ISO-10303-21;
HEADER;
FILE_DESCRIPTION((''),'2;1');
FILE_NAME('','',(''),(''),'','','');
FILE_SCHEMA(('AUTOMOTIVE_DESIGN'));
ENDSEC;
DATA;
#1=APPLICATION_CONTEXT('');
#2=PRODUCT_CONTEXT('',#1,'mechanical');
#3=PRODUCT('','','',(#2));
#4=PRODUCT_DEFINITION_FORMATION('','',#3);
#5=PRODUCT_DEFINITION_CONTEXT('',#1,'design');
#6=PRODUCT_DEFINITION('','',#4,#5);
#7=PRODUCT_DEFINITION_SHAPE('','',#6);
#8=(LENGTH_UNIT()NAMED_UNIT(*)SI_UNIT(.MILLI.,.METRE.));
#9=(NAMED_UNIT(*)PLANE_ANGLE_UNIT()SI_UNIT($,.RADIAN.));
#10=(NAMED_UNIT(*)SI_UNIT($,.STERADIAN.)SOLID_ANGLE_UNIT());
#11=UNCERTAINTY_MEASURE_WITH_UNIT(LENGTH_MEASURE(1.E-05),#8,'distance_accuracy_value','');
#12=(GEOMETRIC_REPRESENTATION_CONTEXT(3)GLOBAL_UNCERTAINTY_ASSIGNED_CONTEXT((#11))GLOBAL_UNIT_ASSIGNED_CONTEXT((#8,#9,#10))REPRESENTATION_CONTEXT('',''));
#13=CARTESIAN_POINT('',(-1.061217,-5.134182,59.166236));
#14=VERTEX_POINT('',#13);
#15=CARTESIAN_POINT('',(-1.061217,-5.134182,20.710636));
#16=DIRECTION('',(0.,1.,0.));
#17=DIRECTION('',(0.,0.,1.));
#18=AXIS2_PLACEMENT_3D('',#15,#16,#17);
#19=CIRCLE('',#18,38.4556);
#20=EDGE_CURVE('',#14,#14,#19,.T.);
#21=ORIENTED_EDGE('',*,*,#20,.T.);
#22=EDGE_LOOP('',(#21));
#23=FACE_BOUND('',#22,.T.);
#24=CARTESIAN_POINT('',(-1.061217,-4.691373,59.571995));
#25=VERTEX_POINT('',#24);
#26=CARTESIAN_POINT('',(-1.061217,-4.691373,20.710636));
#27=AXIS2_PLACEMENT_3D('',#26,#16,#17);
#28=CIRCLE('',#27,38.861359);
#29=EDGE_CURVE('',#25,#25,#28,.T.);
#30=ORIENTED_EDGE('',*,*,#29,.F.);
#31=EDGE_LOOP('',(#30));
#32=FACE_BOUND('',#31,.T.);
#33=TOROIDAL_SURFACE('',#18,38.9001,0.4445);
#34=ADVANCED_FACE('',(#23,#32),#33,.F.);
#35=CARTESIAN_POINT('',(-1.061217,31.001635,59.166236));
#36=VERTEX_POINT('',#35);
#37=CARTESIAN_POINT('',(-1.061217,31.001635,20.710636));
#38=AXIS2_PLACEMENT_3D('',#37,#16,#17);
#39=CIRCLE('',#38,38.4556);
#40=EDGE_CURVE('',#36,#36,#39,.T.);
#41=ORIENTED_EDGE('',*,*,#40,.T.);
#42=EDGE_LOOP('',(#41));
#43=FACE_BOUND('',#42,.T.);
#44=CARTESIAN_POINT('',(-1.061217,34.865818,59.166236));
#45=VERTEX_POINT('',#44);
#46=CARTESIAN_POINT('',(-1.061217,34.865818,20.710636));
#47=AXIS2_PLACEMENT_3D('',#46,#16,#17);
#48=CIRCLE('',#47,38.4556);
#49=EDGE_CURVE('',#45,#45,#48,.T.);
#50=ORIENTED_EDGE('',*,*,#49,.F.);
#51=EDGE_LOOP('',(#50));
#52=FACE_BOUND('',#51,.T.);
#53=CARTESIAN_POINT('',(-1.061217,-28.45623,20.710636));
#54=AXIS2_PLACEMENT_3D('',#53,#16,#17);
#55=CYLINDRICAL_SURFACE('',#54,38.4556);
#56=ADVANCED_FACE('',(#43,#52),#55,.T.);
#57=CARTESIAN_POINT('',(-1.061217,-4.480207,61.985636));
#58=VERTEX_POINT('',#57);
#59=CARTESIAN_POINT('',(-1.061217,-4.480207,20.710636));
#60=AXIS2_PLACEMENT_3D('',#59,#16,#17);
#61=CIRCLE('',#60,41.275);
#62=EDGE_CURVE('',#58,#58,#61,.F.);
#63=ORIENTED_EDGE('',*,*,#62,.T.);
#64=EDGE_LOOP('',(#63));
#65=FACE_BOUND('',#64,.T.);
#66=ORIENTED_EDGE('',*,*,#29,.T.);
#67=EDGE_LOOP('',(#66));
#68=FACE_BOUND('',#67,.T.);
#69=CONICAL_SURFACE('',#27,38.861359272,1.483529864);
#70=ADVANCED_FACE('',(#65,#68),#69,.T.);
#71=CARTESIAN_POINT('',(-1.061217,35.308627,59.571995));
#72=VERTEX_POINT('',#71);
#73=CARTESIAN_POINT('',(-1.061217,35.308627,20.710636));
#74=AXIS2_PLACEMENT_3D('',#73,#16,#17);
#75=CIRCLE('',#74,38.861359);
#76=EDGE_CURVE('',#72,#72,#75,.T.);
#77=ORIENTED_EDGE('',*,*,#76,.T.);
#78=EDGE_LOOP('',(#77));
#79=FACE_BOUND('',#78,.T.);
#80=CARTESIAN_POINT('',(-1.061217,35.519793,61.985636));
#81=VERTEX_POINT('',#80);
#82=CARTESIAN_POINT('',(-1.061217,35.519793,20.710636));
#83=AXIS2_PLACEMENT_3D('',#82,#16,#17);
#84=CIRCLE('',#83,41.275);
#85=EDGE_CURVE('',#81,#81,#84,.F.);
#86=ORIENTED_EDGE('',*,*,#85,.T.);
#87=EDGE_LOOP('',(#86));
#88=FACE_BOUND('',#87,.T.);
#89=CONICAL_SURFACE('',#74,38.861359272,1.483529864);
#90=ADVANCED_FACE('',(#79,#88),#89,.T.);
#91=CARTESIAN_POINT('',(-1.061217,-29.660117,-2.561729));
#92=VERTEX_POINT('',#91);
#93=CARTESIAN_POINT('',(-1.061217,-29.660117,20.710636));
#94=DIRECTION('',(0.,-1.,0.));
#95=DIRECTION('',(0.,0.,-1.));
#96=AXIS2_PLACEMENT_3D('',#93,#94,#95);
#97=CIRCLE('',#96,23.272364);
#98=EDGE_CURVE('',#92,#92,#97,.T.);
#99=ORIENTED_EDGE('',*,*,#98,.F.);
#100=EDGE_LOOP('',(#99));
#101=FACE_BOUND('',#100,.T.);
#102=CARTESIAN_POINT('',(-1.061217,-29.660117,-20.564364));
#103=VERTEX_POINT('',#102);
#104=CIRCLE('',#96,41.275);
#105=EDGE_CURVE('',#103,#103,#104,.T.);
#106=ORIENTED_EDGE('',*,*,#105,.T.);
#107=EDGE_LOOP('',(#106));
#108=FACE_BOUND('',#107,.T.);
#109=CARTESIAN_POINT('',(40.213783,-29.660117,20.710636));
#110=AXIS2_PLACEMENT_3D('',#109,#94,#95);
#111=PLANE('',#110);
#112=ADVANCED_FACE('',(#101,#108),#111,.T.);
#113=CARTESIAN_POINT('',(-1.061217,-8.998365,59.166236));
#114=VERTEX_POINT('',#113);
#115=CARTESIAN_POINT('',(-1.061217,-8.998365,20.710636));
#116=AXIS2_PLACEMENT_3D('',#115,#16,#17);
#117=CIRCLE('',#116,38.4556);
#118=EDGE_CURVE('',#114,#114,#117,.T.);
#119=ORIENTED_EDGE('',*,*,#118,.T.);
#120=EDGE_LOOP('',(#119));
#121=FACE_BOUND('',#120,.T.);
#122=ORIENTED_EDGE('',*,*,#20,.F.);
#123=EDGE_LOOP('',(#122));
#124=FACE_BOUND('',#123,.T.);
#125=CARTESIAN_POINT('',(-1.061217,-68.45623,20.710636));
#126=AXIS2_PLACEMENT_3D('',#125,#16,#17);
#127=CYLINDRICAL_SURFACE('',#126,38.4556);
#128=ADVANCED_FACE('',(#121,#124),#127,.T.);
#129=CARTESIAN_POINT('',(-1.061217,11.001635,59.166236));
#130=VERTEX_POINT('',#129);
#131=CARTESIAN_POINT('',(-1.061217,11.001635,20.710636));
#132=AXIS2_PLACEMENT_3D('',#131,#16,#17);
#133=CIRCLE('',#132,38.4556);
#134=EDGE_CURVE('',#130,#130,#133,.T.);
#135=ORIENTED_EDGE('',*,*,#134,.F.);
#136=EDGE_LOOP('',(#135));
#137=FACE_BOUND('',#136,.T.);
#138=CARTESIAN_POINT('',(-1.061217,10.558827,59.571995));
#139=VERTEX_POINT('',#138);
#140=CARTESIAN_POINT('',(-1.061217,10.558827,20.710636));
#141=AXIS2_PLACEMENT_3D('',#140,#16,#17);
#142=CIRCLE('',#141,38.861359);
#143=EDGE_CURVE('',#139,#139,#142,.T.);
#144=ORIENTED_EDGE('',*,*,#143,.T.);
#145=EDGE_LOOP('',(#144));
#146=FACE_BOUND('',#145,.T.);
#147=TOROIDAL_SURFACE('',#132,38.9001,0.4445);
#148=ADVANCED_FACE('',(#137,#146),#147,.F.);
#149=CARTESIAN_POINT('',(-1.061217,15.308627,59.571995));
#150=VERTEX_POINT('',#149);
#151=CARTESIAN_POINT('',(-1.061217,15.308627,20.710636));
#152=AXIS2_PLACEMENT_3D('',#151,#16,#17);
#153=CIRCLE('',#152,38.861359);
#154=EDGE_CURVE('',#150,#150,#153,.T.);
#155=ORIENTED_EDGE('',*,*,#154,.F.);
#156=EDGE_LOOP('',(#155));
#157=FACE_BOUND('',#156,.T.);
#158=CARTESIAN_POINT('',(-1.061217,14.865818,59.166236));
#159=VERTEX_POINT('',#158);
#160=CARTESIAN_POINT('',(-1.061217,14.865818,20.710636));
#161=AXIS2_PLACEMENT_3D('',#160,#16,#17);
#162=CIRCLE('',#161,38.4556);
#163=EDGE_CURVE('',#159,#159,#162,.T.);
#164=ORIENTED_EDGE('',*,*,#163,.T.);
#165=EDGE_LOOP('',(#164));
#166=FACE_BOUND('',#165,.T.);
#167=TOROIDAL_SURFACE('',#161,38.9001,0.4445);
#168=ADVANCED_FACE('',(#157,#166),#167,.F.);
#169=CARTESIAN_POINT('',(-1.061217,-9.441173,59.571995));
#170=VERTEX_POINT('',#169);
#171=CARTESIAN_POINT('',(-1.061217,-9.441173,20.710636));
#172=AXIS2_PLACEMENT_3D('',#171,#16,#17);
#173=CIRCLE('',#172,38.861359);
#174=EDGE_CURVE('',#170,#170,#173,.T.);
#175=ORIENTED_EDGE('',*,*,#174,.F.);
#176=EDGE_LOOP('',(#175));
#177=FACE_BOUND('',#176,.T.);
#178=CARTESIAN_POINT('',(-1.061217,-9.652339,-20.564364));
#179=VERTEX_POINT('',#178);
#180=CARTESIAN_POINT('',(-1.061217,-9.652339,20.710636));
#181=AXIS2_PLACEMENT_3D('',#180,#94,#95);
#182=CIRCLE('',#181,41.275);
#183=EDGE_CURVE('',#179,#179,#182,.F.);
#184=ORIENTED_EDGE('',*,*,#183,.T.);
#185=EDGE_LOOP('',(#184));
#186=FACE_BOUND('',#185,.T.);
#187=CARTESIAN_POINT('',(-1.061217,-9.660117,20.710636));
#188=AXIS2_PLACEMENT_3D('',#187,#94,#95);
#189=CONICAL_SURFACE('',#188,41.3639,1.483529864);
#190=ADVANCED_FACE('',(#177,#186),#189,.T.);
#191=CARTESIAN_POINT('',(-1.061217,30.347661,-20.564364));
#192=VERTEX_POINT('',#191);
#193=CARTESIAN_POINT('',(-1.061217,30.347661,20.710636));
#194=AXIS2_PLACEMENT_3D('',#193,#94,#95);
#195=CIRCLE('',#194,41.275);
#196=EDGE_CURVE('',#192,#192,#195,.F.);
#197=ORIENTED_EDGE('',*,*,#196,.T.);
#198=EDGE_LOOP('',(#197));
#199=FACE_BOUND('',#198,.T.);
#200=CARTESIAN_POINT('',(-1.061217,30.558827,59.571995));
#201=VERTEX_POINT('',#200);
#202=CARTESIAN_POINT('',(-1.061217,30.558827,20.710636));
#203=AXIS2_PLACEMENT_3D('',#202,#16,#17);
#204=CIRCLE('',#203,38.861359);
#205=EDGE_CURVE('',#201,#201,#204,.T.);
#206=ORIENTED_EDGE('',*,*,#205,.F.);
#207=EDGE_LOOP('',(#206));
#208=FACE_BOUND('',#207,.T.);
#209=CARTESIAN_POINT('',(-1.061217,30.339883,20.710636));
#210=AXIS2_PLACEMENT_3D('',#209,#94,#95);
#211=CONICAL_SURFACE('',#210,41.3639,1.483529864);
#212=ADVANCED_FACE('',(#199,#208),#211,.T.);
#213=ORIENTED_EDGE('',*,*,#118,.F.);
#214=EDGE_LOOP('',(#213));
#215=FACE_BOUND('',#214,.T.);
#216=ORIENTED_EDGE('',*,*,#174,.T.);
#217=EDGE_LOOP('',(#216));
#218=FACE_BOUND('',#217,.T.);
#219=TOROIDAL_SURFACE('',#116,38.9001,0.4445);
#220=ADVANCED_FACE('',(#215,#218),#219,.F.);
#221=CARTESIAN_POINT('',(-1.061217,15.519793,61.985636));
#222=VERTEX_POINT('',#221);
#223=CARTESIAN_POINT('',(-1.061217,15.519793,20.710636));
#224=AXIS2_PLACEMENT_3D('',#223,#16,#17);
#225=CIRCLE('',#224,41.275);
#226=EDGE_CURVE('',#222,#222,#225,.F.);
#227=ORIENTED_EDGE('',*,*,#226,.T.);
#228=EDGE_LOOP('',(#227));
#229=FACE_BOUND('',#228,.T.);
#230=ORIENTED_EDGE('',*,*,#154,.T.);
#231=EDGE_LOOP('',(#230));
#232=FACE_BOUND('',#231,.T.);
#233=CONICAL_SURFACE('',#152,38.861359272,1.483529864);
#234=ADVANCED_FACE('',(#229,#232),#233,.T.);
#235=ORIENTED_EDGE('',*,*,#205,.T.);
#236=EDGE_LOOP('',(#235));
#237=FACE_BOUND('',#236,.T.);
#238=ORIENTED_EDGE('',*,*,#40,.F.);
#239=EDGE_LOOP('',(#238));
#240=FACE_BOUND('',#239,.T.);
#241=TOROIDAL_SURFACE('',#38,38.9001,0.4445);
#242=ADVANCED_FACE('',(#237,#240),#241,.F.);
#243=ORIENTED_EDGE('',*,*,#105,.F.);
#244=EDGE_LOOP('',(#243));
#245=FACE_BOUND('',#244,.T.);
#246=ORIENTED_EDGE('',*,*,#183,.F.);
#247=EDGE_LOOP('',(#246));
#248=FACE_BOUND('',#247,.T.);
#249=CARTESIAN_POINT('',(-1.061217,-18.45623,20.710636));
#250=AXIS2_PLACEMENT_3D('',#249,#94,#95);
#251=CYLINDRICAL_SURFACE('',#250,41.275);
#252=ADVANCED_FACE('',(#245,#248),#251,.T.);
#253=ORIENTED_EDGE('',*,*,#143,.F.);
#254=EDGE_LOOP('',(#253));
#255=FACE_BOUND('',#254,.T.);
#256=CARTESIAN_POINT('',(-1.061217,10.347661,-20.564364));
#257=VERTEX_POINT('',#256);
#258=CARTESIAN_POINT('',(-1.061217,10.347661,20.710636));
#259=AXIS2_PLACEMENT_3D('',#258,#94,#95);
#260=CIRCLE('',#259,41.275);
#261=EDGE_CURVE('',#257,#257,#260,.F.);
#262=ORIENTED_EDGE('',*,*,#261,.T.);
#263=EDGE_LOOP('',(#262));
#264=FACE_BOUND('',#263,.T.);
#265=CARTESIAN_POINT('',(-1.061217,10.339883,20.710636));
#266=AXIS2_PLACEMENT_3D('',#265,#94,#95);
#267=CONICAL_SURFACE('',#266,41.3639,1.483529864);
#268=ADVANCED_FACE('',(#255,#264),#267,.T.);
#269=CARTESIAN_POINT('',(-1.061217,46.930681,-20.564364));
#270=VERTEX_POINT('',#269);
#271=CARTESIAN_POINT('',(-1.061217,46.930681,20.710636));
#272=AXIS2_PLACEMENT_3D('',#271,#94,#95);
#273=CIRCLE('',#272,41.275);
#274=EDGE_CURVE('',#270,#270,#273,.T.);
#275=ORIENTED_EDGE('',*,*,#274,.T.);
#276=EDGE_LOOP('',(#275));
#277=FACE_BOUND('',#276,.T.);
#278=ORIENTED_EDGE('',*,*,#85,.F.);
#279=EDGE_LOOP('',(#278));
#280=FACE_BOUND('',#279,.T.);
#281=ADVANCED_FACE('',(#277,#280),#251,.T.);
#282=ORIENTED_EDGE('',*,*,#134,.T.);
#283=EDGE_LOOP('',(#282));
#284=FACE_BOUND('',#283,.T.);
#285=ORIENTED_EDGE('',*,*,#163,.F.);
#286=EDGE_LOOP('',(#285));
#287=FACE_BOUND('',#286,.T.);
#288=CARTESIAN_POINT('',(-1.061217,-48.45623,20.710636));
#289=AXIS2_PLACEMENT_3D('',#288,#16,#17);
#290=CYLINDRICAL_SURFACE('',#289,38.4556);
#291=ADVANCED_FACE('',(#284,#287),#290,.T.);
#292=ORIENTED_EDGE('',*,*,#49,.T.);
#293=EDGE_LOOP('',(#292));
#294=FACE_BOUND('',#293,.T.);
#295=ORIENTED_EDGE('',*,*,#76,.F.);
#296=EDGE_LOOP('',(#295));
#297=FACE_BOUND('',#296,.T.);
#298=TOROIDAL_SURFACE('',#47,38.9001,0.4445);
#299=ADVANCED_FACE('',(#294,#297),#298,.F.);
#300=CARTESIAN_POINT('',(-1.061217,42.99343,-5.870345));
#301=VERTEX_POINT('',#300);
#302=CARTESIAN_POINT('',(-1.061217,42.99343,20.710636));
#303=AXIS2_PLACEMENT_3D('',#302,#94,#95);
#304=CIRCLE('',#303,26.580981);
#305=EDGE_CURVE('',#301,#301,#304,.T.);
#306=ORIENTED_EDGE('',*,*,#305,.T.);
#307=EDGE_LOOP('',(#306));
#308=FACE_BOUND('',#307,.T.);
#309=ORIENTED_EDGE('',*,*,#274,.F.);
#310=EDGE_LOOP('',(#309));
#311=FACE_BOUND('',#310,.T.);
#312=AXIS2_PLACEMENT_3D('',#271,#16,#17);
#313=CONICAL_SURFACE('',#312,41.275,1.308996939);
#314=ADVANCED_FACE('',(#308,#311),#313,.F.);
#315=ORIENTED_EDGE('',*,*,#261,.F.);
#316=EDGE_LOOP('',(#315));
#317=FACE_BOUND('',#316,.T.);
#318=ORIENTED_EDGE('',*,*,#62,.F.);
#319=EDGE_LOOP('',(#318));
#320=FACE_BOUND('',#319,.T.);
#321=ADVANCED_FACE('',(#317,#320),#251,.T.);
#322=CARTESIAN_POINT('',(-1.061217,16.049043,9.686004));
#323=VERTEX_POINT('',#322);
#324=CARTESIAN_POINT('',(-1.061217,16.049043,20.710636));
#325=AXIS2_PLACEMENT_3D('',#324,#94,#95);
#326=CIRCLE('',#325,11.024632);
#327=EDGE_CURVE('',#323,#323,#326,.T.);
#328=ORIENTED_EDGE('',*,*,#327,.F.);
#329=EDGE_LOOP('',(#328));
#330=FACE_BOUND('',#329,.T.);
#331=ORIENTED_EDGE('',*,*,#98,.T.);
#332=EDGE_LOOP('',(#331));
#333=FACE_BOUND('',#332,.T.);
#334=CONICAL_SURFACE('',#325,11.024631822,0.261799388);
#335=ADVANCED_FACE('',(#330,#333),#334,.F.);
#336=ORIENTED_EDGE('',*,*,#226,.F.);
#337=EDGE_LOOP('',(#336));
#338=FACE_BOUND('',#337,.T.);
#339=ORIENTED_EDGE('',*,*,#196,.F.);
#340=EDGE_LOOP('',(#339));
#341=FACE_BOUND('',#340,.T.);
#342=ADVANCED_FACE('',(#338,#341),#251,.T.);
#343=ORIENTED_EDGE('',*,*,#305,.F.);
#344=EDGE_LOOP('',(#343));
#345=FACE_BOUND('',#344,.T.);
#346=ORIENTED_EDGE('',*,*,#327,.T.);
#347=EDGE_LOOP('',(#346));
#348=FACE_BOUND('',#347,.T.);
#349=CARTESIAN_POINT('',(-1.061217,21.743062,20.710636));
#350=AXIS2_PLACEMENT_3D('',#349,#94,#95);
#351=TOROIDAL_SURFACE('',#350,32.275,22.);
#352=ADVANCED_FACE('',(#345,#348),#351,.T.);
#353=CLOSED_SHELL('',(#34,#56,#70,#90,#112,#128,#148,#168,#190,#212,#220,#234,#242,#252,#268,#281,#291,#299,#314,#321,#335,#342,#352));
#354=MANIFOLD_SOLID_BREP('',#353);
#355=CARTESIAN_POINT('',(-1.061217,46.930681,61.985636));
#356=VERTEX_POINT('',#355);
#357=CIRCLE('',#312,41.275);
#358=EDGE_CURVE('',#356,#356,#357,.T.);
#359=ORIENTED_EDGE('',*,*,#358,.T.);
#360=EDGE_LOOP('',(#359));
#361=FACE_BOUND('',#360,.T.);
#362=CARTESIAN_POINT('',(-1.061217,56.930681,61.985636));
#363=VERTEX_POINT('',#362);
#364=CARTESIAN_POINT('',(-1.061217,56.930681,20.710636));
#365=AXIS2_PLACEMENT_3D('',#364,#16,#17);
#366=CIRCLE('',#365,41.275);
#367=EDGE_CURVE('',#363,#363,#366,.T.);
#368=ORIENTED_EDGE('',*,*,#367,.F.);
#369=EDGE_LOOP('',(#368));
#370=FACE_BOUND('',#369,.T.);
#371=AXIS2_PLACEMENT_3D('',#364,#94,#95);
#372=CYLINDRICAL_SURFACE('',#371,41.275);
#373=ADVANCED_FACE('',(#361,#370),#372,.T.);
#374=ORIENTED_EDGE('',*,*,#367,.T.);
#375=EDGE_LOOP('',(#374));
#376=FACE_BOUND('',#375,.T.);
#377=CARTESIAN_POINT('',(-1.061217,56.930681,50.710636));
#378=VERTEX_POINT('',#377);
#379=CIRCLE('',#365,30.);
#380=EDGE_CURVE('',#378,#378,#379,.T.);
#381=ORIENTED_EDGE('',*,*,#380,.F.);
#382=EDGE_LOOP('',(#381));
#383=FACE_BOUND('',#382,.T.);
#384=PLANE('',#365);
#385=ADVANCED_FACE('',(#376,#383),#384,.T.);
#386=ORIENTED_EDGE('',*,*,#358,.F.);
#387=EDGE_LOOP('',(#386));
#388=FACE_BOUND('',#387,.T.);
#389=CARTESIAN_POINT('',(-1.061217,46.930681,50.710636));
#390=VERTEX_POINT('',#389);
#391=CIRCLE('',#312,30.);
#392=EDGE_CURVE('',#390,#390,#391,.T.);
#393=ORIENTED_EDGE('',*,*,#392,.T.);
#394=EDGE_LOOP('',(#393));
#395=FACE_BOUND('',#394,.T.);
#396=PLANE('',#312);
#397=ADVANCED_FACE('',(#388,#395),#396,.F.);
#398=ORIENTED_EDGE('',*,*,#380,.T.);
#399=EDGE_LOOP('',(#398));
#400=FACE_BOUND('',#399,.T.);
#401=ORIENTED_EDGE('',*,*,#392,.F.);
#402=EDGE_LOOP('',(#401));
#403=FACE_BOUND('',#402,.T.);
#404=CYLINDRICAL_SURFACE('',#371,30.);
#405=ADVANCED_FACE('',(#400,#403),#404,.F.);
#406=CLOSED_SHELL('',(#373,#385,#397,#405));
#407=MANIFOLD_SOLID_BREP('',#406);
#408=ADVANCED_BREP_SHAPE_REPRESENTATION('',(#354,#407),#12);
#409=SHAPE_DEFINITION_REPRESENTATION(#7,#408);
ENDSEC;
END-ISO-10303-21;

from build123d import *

# Parameters (mm, degrees)
SKETCH1_R           = 41.275
SKETCH1_R_2         = 30
BOSS_EXTRUDE1_DEPTH = 10


# Read off the part's stored shape, not the designer's step: Nozzle_rev2
with BuildPart() as part:
    # Nozzle_rev2 outline → Nozzle_rev2 (revolve)
    with BuildSketch(Plane(origin=(-1.061217108, 0, 20.710635557), x_dir=(1, 0, 0), z_dir=(0, 0, 1))):
        with BuildLine():
            Line((41.275, 15.519793134), (41.275, 30.347660732))
            Line((41.275, 30.347660732), (38.861359272, 30.558826933))
            ThreePointArc((38.861359272, 30.558826933), (38.572380224, 30.701335629), (38.4556, 31.001635476))
            Line((38.4556, 31.001635476), (38.4556, 34.86581839))
            ThreePointArc((38.4556, 34.86581839), (38.572380224, 35.166118237), (38.861359272, 35.308626933))
            Line((38.861359272, 35.308626933), (41.275, 35.519793134))
            Line((41.275, 35.519793134), (41.275, 46.930680607))
            Line((41.275, 46.930680607), (26.580981008, 42.993430084))
            ThreePointArc((26.580981008, 42.993430084), (13.222441117, 32.743061906), (11.024631822, 16.049042913))
            Line((11.024631822, 16.049042913), (23.27236431, -29.660117011))
            Line((23.27236431, -29.660117011), (41.275, -29.660117011))
            Line((41.275, -29.660117011), (41.275, -9.652339268))
            Line((41.275, -9.652339268), (38.861359272, -9.441173067))
            ThreePointArc((38.861359272, -9.441173067), (38.572380224, -9.298664371), (38.4556, -8.998364524))
            Line((38.4556, -8.998364524), (38.4556, -5.13418161))
            ThreePointArc((38.4556, -5.13418161), (38.572380224, -4.833881763), (38.861359272, -4.691373067))
            Line((38.861359272, -4.691373067), (41.275, -4.480206866))
            Line((41.275, -4.480206866), (41.275, 10.347660732))
            Line((41.275, 10.347660732), (38.861359272, 10.558826933))
            ThreePointArc((38.861359272, 10.558826933), (38.572380224, 10.701335629), (38.4556, 11.001635476))
            Line((38.4556, 11.001635476), (38.4556, 14.86581839))
            ThreePointArc((38.4556, 14.86581839), (38.572380224, 15.166118237), (38.861359272, 15.308626933))
            Line((38.861359272, 15.308626933), (41.275, 15.519793134))
        make_face()
    revolve(axis=Axis((-1.061217108, 0, 20.710635557), (0, 1, 0)))


with BuildPart() as body_2:
    # Sketch1 → Boss-Extrude1 (new body)
    with BuildSketch(Plane(origin=(0, 46.930680607, 0), x_dir=(1, 0, 0), z_dir=(0, 1, 0))):
        with Locations(Location((-1.061217108, -20.710635557, 0), (0, 0, 270))):
            Circle(SKETCH1_R)
        with Locations(Location((-1.061217108, -20.710635557, 0), (0, 0, 270))):
            Circle(SKETCH1_R_2, mode=Mode.SUBTRACT)
    extrude(amount=BOSS_EXTRUDE1_DEPTH)


solid = Compound([part.part, body_2.part])
